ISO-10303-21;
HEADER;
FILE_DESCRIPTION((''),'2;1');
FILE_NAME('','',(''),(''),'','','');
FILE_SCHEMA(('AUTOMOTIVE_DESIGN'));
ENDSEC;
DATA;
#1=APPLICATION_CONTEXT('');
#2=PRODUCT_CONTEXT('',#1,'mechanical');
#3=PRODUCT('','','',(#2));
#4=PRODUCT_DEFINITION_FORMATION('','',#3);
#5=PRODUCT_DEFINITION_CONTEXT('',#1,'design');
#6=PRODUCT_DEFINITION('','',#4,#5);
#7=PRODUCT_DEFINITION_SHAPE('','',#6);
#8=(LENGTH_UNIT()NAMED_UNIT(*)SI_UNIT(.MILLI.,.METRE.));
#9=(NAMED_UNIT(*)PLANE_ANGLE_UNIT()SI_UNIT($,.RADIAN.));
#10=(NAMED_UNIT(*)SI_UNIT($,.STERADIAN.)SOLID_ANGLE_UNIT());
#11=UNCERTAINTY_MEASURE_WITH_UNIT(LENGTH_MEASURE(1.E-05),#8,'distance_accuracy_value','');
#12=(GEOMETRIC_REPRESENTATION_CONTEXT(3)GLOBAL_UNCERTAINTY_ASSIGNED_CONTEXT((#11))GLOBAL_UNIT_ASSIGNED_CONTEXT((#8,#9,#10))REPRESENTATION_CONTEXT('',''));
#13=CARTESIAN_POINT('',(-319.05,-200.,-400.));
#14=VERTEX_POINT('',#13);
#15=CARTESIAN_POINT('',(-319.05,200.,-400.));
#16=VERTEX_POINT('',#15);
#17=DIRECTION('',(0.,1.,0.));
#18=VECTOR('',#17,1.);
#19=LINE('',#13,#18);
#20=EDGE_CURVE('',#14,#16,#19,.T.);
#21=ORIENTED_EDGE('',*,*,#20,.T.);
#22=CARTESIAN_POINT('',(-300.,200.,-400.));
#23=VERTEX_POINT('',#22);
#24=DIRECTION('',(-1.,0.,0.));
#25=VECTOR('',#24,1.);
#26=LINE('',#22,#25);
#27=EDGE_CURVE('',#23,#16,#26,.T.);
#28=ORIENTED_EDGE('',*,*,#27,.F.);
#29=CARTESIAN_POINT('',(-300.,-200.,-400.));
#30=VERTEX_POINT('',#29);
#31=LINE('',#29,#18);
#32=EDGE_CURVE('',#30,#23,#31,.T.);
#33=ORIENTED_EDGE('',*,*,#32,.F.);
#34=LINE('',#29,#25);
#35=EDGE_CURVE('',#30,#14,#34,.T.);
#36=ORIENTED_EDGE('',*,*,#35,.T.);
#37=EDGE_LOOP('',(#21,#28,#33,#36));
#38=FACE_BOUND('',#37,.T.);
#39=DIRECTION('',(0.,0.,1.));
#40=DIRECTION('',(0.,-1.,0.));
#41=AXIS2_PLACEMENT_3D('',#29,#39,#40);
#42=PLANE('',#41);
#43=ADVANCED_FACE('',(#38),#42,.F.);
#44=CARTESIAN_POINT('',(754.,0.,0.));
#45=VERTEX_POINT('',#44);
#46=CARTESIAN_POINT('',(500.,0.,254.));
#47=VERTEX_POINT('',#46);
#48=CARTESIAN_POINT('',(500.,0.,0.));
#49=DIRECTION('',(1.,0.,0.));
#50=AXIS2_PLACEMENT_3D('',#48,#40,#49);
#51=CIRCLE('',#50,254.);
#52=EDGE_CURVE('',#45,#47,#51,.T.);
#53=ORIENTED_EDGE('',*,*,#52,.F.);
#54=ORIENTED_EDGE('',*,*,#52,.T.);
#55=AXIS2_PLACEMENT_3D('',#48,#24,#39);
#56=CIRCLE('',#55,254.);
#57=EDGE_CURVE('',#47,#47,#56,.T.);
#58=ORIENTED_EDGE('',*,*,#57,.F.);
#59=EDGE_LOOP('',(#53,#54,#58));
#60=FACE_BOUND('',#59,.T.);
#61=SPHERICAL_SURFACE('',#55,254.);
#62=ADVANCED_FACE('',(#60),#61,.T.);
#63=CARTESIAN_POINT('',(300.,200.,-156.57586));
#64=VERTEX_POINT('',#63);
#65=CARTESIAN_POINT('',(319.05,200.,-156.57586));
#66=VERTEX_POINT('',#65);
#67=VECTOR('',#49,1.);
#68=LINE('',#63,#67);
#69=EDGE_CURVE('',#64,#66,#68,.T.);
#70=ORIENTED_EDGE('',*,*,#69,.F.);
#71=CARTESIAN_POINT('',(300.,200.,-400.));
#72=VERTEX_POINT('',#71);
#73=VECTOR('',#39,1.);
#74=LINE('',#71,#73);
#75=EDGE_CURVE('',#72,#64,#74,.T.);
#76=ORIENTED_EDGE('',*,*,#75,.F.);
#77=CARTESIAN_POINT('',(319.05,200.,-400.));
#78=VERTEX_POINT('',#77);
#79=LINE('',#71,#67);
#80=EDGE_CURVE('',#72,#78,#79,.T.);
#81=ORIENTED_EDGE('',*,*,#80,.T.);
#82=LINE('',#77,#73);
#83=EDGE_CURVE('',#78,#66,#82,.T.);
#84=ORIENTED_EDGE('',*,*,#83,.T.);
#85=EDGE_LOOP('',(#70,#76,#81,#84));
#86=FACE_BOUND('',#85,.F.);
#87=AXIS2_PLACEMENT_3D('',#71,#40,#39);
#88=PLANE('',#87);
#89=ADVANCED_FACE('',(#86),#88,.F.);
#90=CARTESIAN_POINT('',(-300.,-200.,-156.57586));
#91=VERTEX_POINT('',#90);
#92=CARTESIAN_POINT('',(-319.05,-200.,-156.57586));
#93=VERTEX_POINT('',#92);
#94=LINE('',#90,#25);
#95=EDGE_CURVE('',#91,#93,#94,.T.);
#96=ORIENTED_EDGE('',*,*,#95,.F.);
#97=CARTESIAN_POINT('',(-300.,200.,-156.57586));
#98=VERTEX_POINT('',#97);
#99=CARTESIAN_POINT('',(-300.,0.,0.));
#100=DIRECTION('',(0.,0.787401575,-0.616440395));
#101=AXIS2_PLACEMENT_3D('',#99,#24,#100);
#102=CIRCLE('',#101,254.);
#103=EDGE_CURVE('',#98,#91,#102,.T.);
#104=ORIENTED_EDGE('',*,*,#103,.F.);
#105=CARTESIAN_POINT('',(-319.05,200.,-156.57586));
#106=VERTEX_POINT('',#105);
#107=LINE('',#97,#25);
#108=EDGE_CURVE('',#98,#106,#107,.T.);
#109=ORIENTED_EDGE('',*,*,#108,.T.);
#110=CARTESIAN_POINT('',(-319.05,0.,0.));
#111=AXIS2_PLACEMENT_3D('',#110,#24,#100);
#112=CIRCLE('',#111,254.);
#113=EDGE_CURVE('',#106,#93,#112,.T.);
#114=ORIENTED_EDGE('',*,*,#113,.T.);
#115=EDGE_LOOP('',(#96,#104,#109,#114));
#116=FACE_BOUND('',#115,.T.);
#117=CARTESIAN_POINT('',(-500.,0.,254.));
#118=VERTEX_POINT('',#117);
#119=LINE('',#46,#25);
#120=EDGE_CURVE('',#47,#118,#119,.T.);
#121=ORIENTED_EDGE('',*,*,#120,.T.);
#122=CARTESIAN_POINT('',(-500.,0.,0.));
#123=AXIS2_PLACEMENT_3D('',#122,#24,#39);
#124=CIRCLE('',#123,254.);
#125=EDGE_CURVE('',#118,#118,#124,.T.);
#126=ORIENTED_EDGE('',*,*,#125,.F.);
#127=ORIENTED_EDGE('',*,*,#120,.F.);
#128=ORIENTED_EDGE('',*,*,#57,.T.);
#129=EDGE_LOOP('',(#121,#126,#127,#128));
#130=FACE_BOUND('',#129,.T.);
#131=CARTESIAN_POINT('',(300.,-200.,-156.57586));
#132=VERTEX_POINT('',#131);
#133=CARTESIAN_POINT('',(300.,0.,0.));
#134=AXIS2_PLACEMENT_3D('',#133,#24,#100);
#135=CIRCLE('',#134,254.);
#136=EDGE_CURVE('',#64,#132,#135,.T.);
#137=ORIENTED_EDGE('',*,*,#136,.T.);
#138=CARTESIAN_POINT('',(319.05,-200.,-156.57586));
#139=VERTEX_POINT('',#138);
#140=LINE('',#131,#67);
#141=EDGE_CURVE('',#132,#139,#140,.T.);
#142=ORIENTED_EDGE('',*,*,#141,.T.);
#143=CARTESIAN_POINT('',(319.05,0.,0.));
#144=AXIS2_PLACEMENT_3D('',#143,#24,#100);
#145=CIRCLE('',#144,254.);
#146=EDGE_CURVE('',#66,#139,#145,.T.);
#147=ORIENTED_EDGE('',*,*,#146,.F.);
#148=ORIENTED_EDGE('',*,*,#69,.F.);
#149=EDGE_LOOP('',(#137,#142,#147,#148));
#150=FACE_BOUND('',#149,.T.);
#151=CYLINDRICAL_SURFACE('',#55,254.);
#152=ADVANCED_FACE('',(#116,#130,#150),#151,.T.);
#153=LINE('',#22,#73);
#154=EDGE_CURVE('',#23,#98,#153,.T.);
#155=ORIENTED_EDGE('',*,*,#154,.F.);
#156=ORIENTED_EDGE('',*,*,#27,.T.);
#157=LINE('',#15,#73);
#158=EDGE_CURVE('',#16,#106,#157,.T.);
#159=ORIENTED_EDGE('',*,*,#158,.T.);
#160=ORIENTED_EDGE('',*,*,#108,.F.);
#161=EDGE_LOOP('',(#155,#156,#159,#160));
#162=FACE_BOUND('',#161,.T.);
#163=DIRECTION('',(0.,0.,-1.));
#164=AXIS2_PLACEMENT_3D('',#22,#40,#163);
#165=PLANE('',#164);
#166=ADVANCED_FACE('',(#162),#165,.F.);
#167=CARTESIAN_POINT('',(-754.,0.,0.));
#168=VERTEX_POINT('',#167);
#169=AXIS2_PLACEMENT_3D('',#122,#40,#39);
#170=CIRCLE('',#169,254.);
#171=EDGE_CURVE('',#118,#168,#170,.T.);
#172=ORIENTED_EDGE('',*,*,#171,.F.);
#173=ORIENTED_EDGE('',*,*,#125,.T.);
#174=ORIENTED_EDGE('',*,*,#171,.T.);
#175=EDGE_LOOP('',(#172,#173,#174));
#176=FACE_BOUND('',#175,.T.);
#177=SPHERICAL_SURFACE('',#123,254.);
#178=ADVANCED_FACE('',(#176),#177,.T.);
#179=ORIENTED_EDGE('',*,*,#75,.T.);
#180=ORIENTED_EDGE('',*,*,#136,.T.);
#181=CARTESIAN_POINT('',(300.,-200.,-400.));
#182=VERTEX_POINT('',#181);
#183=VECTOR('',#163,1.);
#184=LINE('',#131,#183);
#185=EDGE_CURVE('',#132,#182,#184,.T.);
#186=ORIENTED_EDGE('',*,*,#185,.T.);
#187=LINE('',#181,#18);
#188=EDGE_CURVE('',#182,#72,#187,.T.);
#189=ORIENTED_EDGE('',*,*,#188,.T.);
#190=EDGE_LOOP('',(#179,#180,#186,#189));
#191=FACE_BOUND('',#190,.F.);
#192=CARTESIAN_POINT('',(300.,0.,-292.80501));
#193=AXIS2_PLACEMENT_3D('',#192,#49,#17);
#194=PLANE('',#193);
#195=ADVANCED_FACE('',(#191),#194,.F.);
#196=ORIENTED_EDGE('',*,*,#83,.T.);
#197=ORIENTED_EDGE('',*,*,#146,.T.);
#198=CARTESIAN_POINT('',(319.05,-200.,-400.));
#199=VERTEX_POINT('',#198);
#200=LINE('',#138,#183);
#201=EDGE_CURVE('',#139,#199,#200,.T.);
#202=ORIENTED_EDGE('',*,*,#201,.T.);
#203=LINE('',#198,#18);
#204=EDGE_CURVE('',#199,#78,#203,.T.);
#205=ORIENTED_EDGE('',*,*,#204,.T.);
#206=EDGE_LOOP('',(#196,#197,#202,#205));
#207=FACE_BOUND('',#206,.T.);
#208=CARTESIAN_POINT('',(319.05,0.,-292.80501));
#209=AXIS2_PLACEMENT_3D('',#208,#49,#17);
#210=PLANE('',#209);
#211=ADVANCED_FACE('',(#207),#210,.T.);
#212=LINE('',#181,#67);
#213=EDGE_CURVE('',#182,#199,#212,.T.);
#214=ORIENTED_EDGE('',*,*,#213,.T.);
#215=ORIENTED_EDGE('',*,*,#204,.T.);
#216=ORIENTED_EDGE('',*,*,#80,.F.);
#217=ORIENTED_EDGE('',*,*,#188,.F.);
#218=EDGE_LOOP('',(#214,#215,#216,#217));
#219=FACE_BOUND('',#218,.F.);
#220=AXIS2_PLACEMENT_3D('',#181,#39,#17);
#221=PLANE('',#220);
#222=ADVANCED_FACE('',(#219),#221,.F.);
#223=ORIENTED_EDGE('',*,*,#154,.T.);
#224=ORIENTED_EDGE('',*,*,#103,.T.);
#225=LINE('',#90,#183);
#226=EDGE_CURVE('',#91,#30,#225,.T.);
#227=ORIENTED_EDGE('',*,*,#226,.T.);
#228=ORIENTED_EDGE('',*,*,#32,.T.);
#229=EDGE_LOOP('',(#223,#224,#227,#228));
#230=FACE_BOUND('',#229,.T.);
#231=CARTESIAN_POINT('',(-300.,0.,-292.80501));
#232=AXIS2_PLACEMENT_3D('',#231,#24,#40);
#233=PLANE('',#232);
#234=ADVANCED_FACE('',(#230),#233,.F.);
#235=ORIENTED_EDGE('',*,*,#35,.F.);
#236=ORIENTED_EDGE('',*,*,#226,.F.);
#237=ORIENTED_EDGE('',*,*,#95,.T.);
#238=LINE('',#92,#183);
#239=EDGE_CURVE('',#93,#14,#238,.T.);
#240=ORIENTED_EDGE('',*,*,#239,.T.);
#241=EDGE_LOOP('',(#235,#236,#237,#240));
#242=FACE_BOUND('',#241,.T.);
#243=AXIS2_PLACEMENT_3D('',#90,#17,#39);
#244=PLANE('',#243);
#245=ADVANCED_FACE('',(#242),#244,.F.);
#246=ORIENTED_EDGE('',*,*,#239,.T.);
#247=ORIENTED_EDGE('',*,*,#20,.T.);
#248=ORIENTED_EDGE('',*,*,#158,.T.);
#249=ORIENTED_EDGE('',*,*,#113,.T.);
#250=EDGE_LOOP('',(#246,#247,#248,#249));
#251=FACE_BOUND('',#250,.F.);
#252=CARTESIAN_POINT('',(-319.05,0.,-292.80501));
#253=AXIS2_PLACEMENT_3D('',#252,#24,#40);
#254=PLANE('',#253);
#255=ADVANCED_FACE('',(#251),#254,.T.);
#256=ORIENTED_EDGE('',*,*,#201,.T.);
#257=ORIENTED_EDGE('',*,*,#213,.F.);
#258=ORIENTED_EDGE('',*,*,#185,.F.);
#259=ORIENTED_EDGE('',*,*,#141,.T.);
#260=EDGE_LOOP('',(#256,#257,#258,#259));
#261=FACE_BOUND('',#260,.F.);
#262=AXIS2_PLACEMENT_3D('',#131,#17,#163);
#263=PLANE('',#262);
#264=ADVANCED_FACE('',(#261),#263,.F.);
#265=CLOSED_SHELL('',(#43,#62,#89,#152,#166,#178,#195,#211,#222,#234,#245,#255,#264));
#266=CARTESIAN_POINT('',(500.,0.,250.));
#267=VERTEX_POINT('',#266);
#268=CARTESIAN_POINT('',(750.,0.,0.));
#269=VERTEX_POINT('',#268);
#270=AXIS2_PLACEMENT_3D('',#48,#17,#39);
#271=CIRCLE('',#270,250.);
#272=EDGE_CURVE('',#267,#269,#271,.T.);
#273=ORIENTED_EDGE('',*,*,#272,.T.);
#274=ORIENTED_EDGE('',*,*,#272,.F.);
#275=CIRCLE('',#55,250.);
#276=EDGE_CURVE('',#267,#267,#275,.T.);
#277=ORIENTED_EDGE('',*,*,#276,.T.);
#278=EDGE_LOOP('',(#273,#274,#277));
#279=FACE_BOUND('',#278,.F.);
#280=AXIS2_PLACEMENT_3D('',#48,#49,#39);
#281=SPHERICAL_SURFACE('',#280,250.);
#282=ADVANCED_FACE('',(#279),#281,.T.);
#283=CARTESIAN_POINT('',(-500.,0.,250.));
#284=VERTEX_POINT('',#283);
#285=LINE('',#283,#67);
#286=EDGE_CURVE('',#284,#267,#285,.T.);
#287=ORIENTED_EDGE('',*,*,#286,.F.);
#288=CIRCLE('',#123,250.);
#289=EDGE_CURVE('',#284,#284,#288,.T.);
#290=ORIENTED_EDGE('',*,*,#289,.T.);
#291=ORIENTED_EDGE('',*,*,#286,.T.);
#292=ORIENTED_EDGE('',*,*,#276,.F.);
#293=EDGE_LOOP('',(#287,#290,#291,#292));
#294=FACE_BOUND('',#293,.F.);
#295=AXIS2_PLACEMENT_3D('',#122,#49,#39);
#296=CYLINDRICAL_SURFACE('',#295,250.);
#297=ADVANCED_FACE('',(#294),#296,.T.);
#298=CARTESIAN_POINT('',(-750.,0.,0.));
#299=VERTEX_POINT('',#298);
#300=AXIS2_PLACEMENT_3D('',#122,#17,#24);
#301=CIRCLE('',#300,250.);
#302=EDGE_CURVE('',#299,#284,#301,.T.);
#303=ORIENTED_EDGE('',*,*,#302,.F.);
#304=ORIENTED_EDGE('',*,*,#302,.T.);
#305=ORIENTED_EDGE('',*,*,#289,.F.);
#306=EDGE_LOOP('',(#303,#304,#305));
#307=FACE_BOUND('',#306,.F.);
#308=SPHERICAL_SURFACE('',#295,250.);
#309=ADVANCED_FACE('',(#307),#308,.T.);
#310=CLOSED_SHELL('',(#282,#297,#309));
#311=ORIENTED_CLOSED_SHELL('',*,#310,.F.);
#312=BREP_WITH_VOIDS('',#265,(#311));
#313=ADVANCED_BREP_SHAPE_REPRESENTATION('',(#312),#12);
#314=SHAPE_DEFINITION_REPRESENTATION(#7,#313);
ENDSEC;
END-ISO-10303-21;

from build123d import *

# Parameters (mm, degrees)
F4_DEPTH = 19.05


# Not quite as in the source:
# - a length typed as a fraction of an inch, garbled in the dataset ("3 / 203.2 mm" for 3/8 in), is restored


with BuildPart() as f1:
    # F0 (on Front) → F1 (revolve)
    with BuildSketch(Plane.XZ):
        with BuildLine():
            Line((-754, 0), (-750, 0))
            ThreePointArc((-750, 0), (-676.7766952966, 176.7766952966), (-500, 250))
            Line((-500, 250), (0, 250))
            Line((0, 250), (500, 250))
            ThreePointArc((500, 250), (676.7766952966, 176.7766952966), (750, 0))
            Line((750, 0), (754, 0))
            ThreePointArc((754, 0), (679.6051224214, 179.6051224214), (500, 254))
            Line((500, 254), (0, 254))
            Line((0, 254), (-500, 254))
            ThreePointArc((-500, 254), (-679.6051224214, 179.6051224214), (-754, 0))
        make_face()
    revolve(axis=Axis((-250, 0, 0), (-1, 0, 0)))

    # F3 (on offset) → F4 (join)
    with BuildSketch(Plane.YZ.offset(300)):
        with BuildLine():
            ThreePointArc((200, -156.5758602084), (0, -254), (-200, -156.5758602084))
            Line((-200, -156.5758602084), (-200, -400))
            Line((-200, -400), (200, -400))
            Line((200, -400), (200, -156.5758602084))
        make_face()
    extrude(amount=F4_DEPTH)

    # F5: F1 across plane


with BuildPart() as f1_1:
    add(f1.part)
    add(f1.part.mirror(Plane.YZ))


solid = f1_1.part
